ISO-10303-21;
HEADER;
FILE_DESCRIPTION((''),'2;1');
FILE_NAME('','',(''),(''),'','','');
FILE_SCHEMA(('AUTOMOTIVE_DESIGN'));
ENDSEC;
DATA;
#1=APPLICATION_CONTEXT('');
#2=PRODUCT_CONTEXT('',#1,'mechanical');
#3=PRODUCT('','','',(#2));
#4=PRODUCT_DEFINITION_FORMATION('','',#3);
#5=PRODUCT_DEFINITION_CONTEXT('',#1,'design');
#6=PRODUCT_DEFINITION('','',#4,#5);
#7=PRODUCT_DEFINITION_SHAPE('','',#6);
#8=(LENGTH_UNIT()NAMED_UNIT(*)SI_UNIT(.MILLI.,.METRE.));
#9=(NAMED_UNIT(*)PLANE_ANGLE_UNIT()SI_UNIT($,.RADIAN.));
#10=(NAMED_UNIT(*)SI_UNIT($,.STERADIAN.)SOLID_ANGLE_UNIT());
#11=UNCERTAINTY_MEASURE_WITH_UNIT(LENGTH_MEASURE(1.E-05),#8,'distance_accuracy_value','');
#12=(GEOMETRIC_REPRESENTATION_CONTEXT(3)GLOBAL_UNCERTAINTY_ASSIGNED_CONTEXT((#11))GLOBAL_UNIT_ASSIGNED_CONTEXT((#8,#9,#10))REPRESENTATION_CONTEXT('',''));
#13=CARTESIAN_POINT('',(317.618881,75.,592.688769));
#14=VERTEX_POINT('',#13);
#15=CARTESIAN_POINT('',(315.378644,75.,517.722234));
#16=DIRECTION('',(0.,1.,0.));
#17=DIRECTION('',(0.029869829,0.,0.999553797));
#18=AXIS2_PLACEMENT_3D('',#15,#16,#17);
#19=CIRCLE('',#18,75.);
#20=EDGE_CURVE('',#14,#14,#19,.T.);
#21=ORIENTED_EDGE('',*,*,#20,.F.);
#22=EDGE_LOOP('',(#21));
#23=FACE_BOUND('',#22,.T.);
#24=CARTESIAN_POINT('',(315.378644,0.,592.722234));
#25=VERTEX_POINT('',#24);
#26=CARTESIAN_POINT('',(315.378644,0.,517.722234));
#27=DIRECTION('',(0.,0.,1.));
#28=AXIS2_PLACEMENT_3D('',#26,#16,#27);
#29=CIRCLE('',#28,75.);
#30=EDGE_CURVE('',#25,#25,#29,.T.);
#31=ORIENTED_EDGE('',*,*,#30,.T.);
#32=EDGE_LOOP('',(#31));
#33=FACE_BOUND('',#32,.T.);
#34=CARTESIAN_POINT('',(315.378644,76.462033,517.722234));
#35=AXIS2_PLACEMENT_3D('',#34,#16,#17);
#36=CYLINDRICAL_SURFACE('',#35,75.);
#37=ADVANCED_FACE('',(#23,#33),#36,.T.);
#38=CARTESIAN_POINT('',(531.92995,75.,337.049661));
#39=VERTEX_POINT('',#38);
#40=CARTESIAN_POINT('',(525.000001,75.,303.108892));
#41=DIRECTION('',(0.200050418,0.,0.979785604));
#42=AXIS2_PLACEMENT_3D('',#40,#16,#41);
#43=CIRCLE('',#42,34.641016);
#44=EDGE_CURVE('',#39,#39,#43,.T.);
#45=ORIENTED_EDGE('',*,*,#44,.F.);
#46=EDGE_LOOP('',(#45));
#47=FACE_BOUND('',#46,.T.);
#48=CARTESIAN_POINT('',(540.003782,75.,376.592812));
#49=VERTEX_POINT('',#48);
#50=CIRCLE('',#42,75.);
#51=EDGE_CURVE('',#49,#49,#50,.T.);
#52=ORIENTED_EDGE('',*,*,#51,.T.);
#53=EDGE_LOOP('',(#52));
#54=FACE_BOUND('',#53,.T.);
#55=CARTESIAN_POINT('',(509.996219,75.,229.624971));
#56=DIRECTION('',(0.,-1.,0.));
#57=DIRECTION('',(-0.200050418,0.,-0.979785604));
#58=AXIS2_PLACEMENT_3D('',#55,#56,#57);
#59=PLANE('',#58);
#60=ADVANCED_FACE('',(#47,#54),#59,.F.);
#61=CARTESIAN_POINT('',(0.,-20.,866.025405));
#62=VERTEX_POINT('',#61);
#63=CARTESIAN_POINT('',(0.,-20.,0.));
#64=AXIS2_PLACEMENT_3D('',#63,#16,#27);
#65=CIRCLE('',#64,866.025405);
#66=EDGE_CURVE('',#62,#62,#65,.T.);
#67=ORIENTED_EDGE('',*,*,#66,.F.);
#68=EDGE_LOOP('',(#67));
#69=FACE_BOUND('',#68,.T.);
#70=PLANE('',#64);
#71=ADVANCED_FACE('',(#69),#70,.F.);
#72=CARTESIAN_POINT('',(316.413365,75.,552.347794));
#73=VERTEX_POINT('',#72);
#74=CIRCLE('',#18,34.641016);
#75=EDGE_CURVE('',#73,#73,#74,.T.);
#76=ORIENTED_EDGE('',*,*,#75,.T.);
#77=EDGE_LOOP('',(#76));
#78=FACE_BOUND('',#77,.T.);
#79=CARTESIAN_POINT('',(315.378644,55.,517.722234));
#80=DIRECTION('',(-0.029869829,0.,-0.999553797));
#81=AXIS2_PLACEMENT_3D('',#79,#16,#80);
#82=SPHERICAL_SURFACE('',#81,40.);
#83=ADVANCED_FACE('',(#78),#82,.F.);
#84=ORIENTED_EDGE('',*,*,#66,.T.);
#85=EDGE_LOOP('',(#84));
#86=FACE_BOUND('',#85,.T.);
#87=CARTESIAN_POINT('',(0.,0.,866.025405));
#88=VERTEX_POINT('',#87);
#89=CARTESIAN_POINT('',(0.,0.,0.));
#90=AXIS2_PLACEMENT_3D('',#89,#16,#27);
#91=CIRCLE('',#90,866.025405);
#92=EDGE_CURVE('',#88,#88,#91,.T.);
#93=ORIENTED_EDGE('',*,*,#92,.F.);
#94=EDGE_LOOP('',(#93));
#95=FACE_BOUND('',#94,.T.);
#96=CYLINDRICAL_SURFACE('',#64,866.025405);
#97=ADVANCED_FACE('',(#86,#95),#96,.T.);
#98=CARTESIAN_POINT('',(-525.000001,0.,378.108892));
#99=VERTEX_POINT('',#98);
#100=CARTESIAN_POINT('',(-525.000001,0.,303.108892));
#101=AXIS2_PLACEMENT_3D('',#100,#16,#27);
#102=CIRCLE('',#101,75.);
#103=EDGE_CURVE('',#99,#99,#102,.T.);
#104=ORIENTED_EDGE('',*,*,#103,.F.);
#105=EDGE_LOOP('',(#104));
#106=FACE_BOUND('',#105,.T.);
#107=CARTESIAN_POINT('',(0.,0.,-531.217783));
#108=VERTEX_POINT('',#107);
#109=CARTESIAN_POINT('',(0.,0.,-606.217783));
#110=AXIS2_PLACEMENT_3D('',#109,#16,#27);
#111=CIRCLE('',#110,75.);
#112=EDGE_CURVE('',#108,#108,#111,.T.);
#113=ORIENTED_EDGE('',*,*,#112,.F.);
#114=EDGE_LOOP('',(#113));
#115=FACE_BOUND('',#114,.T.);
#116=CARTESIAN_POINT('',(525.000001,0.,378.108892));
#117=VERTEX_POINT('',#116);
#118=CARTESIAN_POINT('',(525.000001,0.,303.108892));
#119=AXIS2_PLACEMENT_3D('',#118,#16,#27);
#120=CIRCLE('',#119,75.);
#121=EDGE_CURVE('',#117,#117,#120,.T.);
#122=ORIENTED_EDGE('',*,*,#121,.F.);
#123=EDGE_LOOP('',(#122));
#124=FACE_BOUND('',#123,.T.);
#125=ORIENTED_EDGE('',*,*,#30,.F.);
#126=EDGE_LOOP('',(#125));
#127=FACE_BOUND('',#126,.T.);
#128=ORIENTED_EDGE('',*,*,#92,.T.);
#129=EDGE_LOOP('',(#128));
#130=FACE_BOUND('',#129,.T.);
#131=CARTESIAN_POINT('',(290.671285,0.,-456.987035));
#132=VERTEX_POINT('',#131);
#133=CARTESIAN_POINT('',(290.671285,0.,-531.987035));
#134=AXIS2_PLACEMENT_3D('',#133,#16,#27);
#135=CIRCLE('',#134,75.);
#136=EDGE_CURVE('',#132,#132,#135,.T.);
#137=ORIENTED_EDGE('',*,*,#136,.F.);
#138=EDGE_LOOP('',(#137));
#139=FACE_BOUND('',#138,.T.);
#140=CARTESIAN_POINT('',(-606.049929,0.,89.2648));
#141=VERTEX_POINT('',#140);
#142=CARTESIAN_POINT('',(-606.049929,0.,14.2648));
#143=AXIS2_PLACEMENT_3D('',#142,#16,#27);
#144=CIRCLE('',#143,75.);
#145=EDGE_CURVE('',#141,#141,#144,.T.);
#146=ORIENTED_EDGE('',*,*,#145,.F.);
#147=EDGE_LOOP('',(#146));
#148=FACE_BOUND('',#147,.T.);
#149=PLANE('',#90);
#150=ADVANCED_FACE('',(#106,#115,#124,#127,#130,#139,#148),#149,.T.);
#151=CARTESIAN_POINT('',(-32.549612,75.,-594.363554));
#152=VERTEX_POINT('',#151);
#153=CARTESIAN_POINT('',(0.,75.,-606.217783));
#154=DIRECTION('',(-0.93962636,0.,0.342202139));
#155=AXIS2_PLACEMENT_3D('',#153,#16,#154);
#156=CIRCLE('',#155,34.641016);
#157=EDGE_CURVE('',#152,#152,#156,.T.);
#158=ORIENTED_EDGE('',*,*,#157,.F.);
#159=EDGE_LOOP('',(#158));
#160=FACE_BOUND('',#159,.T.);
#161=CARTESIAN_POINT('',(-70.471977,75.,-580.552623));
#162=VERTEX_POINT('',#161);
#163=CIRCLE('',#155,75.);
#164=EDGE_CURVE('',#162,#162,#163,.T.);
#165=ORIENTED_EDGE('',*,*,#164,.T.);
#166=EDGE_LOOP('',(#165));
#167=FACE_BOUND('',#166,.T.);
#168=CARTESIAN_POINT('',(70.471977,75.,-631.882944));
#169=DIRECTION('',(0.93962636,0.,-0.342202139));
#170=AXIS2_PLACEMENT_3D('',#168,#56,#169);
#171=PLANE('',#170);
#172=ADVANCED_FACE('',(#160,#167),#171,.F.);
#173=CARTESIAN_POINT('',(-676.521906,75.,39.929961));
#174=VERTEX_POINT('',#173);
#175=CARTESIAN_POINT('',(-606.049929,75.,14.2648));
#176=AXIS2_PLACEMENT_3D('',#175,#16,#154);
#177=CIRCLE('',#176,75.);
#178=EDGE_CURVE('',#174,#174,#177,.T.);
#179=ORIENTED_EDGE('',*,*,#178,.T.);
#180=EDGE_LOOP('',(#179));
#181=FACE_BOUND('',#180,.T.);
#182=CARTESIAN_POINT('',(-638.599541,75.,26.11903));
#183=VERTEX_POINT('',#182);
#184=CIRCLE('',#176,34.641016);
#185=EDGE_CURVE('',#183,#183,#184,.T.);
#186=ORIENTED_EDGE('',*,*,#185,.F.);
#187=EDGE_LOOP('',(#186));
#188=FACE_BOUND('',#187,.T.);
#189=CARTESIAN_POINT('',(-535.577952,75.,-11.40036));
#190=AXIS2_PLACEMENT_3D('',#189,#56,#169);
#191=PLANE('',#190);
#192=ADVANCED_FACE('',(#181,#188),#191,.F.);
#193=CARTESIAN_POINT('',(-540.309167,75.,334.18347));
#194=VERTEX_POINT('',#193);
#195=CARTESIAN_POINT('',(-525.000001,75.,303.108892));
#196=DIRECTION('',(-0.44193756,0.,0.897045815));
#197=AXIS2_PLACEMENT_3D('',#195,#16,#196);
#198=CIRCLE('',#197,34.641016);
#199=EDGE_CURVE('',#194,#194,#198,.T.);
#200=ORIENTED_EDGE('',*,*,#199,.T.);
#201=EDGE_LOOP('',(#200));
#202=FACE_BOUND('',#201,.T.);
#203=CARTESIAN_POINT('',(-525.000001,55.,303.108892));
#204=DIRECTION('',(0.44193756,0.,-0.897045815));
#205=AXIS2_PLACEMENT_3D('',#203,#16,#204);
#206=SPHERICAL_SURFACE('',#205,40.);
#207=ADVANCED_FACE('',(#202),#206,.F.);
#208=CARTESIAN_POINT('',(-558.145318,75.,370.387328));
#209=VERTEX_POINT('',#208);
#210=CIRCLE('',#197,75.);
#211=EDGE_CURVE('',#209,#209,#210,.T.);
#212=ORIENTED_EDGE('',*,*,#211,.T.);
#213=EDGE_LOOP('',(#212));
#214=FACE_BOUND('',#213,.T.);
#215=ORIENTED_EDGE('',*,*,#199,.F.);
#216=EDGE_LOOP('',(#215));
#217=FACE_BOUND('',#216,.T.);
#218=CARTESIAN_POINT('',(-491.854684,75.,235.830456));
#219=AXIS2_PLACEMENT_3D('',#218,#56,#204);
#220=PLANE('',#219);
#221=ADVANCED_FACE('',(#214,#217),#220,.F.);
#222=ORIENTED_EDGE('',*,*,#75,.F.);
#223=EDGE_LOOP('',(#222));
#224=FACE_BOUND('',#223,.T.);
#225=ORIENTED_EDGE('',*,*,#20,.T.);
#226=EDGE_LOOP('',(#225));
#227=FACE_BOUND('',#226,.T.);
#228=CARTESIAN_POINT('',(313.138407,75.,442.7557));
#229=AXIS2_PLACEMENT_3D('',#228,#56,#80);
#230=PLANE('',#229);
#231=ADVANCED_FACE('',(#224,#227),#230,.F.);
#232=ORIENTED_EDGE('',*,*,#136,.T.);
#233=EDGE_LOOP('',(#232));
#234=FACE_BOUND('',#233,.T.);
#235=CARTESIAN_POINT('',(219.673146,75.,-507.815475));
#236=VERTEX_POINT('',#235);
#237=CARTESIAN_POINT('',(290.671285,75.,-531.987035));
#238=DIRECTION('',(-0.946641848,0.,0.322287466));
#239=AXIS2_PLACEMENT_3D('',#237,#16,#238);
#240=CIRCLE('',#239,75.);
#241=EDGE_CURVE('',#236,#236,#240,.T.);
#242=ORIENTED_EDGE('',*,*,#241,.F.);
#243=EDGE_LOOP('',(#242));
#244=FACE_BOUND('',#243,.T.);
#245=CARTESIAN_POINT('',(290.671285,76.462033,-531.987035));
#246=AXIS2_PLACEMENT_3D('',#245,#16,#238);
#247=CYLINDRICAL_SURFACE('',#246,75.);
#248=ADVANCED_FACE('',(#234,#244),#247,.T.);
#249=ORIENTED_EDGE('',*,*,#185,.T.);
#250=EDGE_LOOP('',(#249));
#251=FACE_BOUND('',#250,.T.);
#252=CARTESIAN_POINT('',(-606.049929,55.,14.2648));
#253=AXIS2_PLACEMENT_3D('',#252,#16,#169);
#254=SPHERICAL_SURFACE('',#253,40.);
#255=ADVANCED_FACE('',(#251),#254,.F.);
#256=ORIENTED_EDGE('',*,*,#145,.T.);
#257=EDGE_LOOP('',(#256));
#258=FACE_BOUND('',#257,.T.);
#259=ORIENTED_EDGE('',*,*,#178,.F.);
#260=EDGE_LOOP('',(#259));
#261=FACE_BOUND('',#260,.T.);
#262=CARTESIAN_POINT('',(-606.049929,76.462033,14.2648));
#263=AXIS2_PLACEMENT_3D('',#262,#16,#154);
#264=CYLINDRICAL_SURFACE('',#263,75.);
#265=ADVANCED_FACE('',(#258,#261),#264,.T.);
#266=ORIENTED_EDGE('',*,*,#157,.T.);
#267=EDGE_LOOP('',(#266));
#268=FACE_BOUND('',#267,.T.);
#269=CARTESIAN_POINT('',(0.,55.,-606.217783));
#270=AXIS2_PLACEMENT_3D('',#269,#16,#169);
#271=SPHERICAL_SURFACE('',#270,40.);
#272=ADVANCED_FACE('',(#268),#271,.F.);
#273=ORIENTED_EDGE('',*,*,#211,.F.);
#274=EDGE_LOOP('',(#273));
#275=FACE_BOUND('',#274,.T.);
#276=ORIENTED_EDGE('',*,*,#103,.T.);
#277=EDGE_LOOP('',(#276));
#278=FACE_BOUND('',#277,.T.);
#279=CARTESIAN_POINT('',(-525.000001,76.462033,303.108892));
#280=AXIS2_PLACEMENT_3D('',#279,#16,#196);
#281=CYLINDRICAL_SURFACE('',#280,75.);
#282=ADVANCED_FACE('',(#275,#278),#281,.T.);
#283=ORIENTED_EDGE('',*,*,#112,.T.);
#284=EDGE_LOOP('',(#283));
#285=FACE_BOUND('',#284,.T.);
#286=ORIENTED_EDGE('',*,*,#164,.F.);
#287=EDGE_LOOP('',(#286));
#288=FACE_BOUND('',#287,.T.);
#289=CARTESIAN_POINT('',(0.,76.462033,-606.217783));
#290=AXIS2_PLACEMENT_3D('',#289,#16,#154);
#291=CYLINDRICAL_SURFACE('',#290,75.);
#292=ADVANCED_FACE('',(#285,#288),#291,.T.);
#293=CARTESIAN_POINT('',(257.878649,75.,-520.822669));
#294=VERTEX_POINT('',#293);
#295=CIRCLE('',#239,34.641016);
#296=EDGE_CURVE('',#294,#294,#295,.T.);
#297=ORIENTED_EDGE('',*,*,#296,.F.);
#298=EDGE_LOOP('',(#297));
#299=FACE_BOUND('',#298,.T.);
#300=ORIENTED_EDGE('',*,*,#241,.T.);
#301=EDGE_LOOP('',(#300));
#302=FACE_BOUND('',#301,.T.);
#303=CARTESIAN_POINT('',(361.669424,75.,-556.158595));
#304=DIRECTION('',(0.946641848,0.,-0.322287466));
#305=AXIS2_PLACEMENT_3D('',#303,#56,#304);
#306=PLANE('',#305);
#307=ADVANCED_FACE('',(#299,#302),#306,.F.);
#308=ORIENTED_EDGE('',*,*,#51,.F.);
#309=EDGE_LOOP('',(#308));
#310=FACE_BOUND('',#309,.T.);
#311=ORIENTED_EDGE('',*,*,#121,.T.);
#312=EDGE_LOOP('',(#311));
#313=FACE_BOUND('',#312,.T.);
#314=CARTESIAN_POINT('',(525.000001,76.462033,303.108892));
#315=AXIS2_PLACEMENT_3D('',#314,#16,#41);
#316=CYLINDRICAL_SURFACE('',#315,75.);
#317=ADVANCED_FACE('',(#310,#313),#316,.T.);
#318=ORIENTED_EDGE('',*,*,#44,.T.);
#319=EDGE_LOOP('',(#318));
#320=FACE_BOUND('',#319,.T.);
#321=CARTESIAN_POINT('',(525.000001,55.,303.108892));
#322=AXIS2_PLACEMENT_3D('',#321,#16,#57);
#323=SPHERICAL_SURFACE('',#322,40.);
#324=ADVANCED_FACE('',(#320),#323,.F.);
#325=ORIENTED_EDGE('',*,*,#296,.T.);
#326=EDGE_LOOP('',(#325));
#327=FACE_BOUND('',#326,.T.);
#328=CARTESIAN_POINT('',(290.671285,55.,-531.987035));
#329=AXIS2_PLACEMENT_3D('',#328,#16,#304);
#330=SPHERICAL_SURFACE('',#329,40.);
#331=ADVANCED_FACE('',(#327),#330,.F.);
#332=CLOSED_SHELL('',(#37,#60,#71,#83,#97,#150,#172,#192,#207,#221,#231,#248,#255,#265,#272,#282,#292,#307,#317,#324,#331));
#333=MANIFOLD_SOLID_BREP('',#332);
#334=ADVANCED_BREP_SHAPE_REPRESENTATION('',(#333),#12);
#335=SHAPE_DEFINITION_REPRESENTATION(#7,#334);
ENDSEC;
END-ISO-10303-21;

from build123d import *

# Parameters (mm, degrees)
SKETCH1_R          = 866.025405
EXTRUDE1_DEPTH     = 20
SKETCH2_R          = 75
CUT_EXTRUDE1_DEPTH = 10


# Read off the part's stored shape, not the designer's step: 连接重组1
with BuildPart() as part:
    # Sketch1 → Extrude1 (new body)
    with BuildSketch(Plane(origin=(0, 0, 0), x_dir=(1, 0, 0), z_dir=(0, 1, 0))):
        with Locations(Location((0, 0, 0), (0, 0, 270))):
            Circle(SKETCH1_R)
    extrude(amount=-EXTRUDE1_DEPTH)

    # Sketch2 → Cut-Extrude1 (cut)
    with BuildSketch(Plane(origin=(0, 0, 0), x_dir=(1, 0, 0), z_dir=(0, 1, 0))):
        with Locations(Location((0, 606.2177835, 0), (0, 0, 270))):
            Circle(SKETCH2_R)
        with Locations(Location((290.671285018, 531.987034708, 0), (0, 0, 270))):
            Circle(SKETCH2_R)
        with Locations(Location((525.000000737, -303.10889175, 0), (0, 0, 270))):
            Circle(SKETCH2_R)
        with Locations(Location((315.378644033, -517.72223433, 0), (0, 0, 270))):
            Circle(SKETCH2_R)
        with Locations(Location((-525.000000737, -303.10889175, 0), (0, 0, 270))):
            Circle(SKETCH2_R)
        with Locations(Location((-606.04992905, -14.264800378, 0), (0, 0, 270))):
            Circle(SKETCH2_R)
    extrude(amount=-CUT_EXTRUDE1_DEPTH, mode=Mode.SUBTRACT)

    # 连接重组1 outline → 连接重组1 (revolve)
    with BuildSketch(Plane.XY.offset(-606.2177835)):
        with BuildLine():
            Line((75, 75), (34.641016131, 75.000000035))
            ThreePointArc((34.641016131, 75.000000035), (34.641016161, 35.000000018), (0, 15))
            Line((0, 15), (0, -10))
            Line((0, -10), (75, -10))
            Line((75, -10), (75, 75))
        make_face()
    revolve(axis=Axis((0, 0, -606.2177835), (0, 1, 0)))

    # Other 1 2 outline → Other 1 2 (revolve)
    with BuildSketch(Plane(origin=(290.671285018, 0, -531.987034708), x_dir=(1, 0, 0), z_dir=(0, 0, 1))):
        with BuildLine():
            Line((75, 75), (34.641016131, 75.000000035))
            ThreePointArc((34.641016131, 75.000000035), (34.641016161, 35.000000018), (0, 15))
            Line((0, 15), (0, -10))
            Line((0, -10), (75, -10))
            Line((75, -10), (75, 75))
        make_face()
    revolve(axis=Axis((290.671285018, 0, -531.987034708), (0, 1, 0)))

    # Other 1 3 outline → Other 1 3 (revolve)
    with BuildSketch(Plane(origin=(315.378644033, 0, 517.72223433), x_dir=(1, 0, 0), z_dir=(0, 0, 1))):
        with BuildLine():
            Line((75, 75), (34.641016131, 75.000000035))
            ThreePointArc((34.641016131, 75.000000035), (34.641016161, 35.000000018), (0, 15))
            Line((0, 15), (0, -10))
            Line((0, -10), (75, -10))
            Line((75, -10), (75, 75))
        make_face()
    revolve(axis=Axis((315.378644033, 0, 517.72223433), (0, 1, 0)))

    # Other 1 4 outline → Other 1 4 (revolve)
    with BuildSketch(Plane(origin=(-525.000000737, 0, 303.10889175), x_dir=(1, 0, 0), z_dir=(0, 0, 1))):
        with BuildLine():
            Line((75, 75), (34.641016131, 75.000000035))
            ThreePointArc((34.641016131, 75.000000035), (34.641016161, 35.000000018), (0, 15))
            Line((0, 15), (0, -10))
            Line((0, -10), (75, -10))
            Line((75, -10), (75, 75))
        make_face()
    revolve(axis=Axis((-525.000000737, 0, 303.10889175), (0, 1, 0)))

    # Other 1 5 outline → Other 1 5 (revolve)
    with BuildSketch(Plane(origin=(-606.04992905, 0, 14.264800378), x_dir=(1, 0, 0), z_dir=(0, 0, 1))):
        with BuildLine():
            Line((75, 75), (34.641016131, 75.000000035))
            ThreePointArc((34.641016131, 75.000000035), (34.641016161, 35.000000018), (0, 15))
            Line((0, 15), (0, -10))
            Line((0, -10), (75, -10))
            Line((75, -10), (75, 75))
        make_face()
    revolve(axis=Axis((-606.04992905, 0, 14.264800378), (0, 1, 0)))

    # Other 1 6 outline → Other 1 6 (revolve)
    with BuildSketch(Plane(origin=(525.000000737, 0, 303.10889175), x_dir=(1, 0, 0), z_dir=(0, 0, 1))):
        with BuildLine():
            Line((75, 75), (34.641016131, 75.000000035))
            ThreePointArc((34.641016131, 75.000000035), (34.641016161, 35.000000018), (0, 15))
            Line((0, 15), (0, -10))
            Line((0, -10), (75, -10))
            Line((75, -10), (75, 75))
        make_face()
    revolve(axis=Axis((525.000000737, 0, 303.10889175), (0, 1, 0)))


solid = part.part
